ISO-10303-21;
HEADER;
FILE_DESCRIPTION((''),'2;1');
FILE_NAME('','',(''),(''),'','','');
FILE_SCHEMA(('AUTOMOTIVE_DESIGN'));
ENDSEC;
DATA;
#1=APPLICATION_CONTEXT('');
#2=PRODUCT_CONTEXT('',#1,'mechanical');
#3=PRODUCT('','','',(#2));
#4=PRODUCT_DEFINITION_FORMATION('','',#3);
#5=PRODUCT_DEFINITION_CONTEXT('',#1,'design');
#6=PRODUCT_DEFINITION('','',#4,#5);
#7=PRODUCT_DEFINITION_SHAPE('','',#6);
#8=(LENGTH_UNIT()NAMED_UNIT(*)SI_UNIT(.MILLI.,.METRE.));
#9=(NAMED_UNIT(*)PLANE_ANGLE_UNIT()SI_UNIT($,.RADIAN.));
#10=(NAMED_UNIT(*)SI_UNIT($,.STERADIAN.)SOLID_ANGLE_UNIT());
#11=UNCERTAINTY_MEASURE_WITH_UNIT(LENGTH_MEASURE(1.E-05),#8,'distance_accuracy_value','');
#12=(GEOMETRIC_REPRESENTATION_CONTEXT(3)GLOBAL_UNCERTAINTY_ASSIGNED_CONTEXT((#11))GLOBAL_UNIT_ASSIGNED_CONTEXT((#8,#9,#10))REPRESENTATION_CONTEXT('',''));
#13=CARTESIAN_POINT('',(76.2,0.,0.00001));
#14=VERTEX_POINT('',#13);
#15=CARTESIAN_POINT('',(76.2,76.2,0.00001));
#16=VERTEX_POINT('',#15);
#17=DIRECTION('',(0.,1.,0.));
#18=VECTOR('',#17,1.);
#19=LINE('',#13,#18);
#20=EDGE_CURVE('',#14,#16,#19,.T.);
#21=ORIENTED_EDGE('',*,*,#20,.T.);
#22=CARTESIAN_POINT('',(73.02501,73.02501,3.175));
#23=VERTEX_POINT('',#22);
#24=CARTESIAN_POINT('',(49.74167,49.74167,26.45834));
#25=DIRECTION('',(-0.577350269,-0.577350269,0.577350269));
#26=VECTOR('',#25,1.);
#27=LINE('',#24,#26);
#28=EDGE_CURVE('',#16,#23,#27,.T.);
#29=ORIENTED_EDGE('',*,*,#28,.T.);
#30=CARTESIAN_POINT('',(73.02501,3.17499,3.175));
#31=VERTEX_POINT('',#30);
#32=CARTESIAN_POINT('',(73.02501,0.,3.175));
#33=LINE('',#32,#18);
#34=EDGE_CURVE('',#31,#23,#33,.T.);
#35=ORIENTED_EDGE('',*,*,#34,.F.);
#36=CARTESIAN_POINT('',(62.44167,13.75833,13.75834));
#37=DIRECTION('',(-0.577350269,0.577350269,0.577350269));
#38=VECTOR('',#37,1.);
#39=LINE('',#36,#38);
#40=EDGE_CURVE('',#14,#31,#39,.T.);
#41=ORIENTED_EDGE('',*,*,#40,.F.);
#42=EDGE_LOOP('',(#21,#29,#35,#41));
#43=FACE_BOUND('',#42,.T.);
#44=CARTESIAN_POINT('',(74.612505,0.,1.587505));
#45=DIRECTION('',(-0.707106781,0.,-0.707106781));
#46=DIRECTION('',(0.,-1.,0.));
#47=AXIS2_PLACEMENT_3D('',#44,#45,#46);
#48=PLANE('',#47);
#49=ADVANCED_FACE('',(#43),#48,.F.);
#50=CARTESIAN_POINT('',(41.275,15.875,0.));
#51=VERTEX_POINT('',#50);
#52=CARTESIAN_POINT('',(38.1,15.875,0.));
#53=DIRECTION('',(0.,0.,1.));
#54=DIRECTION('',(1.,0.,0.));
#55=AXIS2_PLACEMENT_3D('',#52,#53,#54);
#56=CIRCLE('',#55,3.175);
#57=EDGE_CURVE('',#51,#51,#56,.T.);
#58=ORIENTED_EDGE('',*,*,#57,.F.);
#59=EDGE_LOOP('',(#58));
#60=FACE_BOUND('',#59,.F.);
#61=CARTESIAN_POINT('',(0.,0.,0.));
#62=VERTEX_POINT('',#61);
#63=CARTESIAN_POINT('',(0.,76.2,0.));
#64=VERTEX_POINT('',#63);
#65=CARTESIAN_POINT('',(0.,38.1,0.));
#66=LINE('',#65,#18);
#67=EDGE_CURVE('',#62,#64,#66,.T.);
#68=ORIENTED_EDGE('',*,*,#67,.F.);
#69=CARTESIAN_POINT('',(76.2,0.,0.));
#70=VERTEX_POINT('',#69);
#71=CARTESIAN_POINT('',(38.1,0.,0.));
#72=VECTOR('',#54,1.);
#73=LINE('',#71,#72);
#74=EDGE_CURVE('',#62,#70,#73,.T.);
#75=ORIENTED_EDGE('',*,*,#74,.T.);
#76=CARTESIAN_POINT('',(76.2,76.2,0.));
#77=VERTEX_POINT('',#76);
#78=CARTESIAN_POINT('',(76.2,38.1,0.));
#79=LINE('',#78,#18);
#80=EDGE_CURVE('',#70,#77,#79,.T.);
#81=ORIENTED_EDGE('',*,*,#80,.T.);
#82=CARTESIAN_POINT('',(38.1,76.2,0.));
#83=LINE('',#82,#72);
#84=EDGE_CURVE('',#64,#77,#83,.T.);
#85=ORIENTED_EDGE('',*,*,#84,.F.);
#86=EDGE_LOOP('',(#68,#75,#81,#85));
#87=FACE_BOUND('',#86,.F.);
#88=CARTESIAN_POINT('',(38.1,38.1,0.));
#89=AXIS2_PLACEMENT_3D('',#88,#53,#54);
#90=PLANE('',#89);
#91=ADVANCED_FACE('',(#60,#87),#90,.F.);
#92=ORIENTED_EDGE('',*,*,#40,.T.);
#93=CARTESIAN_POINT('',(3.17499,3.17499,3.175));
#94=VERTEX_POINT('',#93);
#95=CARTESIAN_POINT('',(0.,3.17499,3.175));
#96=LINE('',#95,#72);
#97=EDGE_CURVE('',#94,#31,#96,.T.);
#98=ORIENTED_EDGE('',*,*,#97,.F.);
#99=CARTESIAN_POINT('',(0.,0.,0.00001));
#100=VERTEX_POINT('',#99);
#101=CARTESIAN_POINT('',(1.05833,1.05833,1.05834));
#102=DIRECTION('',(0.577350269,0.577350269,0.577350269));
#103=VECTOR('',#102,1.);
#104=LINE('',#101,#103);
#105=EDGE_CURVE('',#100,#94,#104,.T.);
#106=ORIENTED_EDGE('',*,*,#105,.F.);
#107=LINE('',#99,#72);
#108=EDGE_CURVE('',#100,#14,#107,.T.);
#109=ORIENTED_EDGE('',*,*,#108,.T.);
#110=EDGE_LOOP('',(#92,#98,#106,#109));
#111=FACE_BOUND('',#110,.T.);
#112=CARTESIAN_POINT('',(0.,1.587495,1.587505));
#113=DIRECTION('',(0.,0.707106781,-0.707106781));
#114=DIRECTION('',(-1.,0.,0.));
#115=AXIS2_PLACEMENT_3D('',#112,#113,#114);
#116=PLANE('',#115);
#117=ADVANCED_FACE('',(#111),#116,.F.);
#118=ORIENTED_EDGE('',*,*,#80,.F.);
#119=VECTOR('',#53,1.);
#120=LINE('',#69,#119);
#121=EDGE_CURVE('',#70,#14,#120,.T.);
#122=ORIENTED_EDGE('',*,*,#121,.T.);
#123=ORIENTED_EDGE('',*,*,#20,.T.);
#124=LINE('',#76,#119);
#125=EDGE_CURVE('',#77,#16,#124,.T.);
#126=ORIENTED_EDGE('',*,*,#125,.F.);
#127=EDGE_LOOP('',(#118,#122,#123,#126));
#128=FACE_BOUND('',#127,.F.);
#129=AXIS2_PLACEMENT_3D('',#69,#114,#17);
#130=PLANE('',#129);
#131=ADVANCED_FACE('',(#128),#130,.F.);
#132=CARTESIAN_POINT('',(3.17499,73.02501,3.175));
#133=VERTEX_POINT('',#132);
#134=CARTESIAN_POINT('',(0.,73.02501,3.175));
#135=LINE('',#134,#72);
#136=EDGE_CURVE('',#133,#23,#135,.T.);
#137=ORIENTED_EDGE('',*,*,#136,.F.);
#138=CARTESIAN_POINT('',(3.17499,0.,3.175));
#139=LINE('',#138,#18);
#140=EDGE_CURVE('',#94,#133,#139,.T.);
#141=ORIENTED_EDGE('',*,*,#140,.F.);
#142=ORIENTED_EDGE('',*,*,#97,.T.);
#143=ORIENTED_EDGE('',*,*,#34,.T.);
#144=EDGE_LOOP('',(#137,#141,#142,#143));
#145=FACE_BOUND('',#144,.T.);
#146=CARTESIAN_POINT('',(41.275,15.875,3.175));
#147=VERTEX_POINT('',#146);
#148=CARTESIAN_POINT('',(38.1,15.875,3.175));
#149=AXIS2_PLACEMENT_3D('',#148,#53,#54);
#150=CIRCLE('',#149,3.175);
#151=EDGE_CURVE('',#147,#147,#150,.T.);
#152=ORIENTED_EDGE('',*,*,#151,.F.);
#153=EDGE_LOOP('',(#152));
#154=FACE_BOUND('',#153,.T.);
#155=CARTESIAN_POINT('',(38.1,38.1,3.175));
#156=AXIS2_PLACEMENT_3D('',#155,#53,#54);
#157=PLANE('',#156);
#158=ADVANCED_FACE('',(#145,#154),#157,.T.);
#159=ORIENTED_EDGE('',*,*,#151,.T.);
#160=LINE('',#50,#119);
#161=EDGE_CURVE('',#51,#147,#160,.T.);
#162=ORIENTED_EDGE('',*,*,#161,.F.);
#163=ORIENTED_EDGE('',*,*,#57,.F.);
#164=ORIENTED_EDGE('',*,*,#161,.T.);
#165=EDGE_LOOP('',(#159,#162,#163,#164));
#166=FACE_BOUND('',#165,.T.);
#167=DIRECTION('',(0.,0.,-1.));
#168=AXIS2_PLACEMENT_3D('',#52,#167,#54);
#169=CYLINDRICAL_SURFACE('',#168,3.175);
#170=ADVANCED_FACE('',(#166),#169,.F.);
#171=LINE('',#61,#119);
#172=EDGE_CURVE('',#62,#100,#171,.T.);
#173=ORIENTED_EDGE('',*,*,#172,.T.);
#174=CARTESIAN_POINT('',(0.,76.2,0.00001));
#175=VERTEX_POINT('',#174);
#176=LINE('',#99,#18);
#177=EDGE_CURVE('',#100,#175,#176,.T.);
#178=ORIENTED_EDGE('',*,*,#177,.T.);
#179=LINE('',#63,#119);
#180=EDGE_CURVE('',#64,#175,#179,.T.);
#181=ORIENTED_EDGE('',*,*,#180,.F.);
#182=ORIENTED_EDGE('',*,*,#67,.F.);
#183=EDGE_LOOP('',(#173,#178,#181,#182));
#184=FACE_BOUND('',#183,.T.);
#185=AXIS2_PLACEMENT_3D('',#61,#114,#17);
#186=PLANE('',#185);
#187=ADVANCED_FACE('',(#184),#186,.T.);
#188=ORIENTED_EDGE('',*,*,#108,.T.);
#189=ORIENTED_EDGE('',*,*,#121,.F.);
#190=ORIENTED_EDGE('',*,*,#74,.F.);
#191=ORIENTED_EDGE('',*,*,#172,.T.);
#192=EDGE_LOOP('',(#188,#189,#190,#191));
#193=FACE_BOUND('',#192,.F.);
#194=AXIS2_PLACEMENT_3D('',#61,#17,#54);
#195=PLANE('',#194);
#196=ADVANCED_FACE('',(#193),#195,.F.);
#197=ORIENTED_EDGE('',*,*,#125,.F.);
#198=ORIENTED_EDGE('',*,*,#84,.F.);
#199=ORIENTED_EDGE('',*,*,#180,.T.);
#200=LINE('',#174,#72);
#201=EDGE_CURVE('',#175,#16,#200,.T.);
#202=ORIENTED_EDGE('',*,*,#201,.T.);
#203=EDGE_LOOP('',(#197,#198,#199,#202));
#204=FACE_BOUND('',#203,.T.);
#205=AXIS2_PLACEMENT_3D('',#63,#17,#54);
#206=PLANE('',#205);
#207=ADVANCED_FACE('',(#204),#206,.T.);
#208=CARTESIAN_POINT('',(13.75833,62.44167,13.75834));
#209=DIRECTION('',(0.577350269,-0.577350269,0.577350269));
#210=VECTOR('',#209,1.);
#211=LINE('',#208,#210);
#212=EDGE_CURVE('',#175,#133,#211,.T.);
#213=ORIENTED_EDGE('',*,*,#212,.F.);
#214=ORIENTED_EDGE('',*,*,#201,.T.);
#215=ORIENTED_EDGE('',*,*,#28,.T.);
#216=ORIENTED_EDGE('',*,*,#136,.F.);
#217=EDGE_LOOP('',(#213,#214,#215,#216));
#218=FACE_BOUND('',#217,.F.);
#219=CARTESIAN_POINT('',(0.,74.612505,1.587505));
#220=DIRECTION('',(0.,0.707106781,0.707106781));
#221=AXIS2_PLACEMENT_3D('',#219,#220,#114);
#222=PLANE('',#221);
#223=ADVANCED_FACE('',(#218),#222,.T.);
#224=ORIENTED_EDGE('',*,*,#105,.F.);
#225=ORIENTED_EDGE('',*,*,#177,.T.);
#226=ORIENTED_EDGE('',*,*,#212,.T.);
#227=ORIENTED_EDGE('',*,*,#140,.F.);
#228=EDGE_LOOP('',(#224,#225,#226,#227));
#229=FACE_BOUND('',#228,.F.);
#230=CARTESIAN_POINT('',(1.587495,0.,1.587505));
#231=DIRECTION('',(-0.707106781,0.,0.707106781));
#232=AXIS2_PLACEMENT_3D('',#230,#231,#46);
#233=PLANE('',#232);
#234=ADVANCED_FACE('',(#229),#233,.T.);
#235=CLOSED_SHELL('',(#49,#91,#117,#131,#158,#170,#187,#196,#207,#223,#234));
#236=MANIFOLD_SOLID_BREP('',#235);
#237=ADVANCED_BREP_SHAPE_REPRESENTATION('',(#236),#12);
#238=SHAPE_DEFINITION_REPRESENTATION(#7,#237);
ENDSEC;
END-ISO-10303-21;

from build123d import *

# Parameters (mm, degrees)
F0_W     = 76.2
F0_H     = 76.2
F0_R     = 3.175
F1_DEPTH = 3.175
F2_SIZE  = 3.17499


# Not quite as in the source:
# - a fillet or chamfer is up to 0.001 mm smaller than in the source, because OpenCascade refuses the exact size


with BuildPart() as f1:
    # F0 (on Top) → F1 (new body)
    with BuildSketch(Plane.XY):
        with Locations((38.1, 38.1)):
            Rectangle(F0_W, F0_H)
        with Locations((38.1, 15.875)):
            Circle(F0_R, mode=Mode.SUBTRACT)
    extrude(amount=F1_DEPTH)

    # F2 (size 3.175 in the source; OpenCascade refuses exactly that, so slightly less here)
    f2_edges = [f1.edges().sort_by_distance(p)[0] for p in [
        (38.1, 76.2, 3.175),
        (76.2, 38.1, 3.175),
        (38.1, 0, 3.175),
        (0, 38.1, 3.175),
    ]]
    chamfer(f2_edges, length=F2_SIZE)


solid = f1.part
